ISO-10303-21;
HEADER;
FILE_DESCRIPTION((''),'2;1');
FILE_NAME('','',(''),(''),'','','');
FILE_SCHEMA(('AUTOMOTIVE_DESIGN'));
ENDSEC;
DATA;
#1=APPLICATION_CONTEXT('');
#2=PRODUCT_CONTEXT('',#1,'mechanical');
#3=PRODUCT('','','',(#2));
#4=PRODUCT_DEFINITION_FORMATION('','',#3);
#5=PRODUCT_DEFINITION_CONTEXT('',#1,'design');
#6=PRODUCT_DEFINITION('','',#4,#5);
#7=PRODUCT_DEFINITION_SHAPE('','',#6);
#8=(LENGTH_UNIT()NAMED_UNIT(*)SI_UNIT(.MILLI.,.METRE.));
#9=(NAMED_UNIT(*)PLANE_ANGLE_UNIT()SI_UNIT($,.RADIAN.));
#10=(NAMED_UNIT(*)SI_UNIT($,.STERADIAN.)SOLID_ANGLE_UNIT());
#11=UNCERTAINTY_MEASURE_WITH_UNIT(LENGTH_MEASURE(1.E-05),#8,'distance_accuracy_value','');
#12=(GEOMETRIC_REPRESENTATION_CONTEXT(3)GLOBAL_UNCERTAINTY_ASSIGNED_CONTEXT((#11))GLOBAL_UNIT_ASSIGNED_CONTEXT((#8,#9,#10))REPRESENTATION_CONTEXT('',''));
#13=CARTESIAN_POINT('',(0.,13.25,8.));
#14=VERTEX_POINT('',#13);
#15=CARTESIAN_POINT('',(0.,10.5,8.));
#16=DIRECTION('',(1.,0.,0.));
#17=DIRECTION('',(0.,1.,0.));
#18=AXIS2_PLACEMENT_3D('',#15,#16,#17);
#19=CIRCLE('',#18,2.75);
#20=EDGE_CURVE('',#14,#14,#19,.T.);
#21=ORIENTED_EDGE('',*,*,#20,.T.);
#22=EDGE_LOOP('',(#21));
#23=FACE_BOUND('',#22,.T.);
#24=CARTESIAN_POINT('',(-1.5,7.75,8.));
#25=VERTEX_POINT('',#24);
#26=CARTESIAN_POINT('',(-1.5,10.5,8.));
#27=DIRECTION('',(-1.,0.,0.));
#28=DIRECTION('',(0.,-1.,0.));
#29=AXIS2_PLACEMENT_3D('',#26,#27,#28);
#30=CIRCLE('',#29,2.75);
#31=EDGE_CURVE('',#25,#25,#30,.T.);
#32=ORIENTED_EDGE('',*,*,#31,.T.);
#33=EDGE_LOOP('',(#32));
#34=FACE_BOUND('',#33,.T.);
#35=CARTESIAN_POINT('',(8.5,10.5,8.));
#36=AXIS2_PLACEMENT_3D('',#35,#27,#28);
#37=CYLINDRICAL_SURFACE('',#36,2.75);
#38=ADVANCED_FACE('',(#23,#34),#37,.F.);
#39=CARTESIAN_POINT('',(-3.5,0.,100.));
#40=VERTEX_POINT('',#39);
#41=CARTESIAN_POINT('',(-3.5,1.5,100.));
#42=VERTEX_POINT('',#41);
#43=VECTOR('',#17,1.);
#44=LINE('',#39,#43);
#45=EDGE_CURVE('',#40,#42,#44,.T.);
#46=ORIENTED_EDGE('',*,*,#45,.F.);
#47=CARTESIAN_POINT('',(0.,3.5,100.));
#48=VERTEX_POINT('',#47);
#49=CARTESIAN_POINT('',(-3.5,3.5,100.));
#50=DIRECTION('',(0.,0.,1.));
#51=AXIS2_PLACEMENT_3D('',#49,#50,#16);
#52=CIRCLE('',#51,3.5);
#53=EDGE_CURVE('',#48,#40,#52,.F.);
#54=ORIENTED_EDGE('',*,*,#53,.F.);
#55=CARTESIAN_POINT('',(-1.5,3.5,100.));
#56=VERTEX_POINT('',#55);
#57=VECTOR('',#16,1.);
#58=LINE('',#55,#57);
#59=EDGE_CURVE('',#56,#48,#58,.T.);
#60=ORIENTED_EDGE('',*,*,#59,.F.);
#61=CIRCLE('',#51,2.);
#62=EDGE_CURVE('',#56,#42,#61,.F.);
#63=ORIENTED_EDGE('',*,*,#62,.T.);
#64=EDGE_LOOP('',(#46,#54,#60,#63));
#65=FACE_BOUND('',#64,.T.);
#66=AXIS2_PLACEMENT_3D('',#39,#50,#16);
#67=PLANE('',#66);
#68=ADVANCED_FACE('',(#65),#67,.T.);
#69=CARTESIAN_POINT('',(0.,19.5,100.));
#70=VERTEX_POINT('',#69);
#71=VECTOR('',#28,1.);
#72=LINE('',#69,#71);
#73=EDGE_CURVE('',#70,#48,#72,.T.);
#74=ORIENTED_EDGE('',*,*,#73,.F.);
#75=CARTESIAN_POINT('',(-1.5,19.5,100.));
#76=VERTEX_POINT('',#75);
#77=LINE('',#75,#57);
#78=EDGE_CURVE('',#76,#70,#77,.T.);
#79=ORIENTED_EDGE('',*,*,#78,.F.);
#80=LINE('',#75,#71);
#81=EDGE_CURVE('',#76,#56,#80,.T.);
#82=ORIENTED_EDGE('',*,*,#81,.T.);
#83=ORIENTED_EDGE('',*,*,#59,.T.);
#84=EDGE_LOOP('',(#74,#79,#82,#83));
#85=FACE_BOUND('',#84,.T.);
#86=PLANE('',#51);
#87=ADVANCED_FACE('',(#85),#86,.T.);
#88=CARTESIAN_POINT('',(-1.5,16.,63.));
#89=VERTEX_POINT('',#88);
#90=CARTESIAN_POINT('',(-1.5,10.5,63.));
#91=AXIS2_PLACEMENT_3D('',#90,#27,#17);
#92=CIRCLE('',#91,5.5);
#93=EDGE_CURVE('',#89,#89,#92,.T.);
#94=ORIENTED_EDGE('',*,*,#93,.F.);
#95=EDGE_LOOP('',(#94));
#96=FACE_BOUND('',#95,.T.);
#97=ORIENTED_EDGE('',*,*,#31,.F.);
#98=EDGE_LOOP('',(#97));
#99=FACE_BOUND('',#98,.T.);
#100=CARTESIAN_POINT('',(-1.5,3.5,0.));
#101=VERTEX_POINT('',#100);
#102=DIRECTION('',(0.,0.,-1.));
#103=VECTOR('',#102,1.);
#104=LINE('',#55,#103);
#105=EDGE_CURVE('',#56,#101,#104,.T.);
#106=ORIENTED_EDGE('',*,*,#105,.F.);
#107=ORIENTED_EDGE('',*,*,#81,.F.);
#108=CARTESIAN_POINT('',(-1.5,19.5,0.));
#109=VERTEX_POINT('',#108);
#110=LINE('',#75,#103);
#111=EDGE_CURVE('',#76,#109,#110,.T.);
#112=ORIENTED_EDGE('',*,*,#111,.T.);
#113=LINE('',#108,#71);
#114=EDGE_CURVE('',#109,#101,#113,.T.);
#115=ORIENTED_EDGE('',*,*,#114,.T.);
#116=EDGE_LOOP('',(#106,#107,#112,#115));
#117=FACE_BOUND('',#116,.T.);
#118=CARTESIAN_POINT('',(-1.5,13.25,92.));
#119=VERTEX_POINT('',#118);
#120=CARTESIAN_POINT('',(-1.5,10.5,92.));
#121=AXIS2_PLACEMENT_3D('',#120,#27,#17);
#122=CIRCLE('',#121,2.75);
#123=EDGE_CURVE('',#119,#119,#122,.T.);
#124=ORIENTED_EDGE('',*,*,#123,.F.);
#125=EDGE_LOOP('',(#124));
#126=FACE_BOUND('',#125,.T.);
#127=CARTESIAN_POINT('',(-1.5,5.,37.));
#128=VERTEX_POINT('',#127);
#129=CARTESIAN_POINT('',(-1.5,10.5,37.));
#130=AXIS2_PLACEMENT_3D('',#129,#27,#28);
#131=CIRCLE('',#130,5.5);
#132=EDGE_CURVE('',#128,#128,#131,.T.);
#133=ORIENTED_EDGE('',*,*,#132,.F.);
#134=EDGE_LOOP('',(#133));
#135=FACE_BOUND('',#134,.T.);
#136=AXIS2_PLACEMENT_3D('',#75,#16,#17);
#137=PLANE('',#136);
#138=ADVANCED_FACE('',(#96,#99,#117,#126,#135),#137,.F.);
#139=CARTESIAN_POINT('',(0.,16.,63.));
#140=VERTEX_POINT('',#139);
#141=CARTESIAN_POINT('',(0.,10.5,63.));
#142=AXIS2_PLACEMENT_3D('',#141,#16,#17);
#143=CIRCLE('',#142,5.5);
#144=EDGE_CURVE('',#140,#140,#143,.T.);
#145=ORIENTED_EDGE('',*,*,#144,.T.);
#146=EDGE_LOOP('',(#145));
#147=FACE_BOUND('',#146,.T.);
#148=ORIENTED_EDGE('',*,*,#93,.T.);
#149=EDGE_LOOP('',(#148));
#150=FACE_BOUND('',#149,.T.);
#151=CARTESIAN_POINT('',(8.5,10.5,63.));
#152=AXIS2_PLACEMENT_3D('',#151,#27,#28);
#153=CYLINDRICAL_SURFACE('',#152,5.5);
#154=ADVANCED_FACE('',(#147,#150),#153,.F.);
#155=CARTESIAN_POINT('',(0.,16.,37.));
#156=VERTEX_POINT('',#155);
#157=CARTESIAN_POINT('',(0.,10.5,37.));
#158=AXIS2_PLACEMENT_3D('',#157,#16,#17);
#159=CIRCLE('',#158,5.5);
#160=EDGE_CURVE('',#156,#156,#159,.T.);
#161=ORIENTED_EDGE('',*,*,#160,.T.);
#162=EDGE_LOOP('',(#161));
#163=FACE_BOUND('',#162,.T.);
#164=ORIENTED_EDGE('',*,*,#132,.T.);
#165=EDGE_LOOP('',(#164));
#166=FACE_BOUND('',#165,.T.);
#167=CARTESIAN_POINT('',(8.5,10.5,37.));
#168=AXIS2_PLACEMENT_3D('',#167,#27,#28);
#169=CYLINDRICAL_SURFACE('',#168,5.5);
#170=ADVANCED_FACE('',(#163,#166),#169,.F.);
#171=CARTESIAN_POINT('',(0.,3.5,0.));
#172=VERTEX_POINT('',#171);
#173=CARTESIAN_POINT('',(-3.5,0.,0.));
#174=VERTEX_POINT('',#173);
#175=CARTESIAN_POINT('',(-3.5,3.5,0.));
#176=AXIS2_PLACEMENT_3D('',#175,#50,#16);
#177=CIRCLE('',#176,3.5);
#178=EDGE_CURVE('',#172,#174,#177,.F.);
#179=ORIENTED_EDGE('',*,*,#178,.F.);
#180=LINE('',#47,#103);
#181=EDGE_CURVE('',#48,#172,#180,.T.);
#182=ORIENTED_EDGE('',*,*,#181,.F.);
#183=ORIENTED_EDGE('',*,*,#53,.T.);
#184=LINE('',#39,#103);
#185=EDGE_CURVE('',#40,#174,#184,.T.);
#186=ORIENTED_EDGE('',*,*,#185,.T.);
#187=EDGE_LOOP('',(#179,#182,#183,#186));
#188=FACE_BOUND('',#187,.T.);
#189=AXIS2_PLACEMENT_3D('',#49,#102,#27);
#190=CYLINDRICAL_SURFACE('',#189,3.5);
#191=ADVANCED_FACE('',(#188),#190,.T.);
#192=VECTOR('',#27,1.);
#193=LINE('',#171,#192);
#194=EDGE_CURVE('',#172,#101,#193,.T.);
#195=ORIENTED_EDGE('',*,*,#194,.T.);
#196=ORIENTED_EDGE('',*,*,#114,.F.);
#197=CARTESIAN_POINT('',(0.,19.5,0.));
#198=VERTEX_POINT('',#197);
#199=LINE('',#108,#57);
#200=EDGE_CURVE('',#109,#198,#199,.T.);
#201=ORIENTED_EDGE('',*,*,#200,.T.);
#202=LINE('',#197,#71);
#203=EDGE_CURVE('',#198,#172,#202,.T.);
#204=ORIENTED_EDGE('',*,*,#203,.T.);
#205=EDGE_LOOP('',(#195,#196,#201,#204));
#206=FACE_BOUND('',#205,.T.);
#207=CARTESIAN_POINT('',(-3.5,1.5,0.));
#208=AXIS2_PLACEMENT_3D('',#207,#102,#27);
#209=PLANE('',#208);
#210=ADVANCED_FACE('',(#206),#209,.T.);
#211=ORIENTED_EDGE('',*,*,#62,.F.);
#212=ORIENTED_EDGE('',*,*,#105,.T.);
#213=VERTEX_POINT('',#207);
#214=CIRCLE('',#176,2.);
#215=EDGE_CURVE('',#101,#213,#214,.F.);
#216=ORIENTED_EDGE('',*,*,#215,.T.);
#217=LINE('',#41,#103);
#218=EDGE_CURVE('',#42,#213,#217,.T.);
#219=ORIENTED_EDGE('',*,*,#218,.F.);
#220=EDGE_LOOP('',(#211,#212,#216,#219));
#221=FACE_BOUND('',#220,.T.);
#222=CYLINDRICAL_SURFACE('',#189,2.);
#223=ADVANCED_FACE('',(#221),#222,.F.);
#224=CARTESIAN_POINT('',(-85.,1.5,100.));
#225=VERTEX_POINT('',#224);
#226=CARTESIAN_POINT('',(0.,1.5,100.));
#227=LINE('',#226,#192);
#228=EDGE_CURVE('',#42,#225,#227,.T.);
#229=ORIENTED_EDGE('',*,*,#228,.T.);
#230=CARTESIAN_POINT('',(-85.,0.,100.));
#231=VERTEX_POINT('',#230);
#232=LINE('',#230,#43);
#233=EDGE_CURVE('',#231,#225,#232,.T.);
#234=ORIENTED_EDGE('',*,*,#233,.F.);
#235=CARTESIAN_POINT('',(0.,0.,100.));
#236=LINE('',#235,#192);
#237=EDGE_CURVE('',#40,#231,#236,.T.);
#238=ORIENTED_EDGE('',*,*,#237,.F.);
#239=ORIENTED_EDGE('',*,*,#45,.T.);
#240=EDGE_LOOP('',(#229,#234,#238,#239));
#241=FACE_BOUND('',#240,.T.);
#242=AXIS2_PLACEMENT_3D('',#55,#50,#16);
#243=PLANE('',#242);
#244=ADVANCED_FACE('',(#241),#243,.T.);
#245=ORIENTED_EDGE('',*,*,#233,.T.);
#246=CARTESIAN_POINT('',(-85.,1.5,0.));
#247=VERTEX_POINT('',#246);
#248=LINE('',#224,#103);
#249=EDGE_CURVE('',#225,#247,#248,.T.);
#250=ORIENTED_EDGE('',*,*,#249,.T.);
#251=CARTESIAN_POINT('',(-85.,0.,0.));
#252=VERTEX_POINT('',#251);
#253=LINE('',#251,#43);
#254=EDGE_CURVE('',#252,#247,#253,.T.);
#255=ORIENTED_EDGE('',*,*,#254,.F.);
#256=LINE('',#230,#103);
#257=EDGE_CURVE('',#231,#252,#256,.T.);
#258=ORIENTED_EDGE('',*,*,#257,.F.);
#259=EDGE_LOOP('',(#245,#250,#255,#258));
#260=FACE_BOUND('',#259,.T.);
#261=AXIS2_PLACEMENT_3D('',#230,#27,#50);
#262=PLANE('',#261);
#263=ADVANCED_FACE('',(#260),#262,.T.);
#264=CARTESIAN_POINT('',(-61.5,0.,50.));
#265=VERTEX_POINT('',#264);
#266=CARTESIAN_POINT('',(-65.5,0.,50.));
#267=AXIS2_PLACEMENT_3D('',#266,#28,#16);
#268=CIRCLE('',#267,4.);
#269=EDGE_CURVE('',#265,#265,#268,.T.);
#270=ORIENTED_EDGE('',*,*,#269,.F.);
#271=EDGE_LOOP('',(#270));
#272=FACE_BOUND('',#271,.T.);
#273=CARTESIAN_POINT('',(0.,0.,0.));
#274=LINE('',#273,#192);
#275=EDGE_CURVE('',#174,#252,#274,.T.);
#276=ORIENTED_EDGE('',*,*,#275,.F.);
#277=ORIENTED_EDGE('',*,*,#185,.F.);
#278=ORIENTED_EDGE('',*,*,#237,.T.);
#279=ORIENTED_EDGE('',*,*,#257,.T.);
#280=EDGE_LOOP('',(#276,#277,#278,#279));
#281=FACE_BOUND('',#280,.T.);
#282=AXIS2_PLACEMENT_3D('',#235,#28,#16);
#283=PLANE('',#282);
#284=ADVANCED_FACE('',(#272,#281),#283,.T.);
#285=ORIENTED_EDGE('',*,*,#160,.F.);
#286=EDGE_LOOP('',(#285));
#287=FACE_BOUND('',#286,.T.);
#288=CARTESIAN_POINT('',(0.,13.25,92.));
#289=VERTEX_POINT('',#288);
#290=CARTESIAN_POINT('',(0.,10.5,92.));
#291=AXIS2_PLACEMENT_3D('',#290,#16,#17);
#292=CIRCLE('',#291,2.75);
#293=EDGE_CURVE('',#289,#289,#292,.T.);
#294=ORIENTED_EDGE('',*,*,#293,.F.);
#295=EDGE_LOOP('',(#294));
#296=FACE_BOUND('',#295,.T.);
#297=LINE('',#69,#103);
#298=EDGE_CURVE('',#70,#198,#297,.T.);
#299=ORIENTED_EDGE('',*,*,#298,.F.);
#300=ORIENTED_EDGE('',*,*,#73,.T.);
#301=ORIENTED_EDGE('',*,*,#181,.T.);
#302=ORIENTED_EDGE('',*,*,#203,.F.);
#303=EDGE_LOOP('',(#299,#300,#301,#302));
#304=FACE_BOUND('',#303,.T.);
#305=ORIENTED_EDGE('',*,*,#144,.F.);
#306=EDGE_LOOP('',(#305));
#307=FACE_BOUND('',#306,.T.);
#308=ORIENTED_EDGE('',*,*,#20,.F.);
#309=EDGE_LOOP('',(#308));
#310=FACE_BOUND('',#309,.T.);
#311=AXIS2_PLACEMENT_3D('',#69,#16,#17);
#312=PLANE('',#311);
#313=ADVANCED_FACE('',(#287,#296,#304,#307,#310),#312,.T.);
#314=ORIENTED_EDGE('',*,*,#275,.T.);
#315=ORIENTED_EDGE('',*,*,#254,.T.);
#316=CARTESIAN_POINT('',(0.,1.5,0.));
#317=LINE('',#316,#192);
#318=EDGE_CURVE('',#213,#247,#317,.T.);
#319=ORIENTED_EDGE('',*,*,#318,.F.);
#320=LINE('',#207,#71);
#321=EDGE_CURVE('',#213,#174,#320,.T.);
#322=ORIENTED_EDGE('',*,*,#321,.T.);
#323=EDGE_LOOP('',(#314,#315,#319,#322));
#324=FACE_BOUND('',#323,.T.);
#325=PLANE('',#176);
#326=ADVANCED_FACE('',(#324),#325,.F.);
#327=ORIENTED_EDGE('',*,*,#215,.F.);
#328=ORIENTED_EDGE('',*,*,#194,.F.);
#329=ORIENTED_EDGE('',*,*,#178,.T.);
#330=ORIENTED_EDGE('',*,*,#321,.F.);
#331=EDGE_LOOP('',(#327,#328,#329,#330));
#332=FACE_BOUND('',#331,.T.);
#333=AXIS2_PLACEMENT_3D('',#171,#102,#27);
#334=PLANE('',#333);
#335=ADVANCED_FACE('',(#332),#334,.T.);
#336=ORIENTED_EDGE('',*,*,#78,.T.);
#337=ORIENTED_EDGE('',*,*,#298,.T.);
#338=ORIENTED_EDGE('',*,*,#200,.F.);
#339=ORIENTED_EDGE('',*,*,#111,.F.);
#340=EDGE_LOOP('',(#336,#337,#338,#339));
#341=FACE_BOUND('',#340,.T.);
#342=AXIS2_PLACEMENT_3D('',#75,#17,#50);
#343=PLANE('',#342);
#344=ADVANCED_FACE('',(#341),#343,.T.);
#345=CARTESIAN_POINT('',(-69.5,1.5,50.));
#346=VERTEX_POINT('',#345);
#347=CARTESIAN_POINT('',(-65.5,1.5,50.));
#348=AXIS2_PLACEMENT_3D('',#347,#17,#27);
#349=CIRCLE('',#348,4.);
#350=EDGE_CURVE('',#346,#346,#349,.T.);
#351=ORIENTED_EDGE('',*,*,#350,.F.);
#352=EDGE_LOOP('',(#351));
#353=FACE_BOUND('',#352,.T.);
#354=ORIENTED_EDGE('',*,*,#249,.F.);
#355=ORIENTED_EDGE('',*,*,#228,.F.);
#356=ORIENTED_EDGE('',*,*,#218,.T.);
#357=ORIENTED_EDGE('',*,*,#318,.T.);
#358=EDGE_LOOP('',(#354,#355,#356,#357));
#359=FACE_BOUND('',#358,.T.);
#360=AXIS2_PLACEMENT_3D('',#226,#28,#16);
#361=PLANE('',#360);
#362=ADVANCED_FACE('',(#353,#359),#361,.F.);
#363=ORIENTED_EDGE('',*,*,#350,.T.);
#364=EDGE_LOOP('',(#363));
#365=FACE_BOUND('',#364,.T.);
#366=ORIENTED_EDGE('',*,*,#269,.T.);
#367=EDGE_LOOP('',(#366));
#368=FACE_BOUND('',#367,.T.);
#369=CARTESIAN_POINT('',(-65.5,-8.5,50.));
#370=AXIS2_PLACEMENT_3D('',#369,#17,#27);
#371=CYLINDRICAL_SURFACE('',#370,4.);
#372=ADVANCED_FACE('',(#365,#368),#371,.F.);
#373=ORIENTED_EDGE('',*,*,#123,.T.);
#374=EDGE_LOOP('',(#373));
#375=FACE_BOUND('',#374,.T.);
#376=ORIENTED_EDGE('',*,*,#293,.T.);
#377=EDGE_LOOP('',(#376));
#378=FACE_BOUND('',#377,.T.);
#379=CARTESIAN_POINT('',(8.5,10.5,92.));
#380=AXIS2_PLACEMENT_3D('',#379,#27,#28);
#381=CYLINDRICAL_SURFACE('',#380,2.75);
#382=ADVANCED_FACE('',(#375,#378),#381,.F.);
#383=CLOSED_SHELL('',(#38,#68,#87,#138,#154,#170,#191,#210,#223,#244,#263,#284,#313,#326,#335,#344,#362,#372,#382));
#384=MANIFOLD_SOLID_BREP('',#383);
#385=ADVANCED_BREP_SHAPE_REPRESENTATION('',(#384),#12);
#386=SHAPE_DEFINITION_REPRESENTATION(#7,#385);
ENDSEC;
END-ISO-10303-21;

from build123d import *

# Parameters (mm, degrees)
BASE_FLANGE1_DEPTH = 100
SKETCH6_R          = 5.5
SKETCH6_R_2        = 2.75
CUT_EXTRUDE1_DEPTH = 10
SKETCH7_R          = 4
CUT_EXTRUDE2_DEPTH = 10


# Sheet-metal steps are written as plain solids
with BuildPart() as part:
    # Sketch1 → Base-Flange1 (new body)
    with BuildSketch(Plane.XY):
        with BuildLine():
            Line((0, 19.5), (0, 3.5))
            ThreePointArc((0, 3.5), (-1.025126266, 1.025126266), (-3.5, 0))
            Line((-3.5, 0), (-85, 0))
            Line((-85, 0), (-85, 1.5))
            Line((-85, 1.5), (-3.5, 1.5))
            ThreePointArc((-3.5, 1.5), (-2.085786438, 2.085786438), (-1.5, 3.5))
            Line((-1.5, 3.5), (-1.5, 19.5))
            Line((-1.5, 19.5), (0, 19.5))
        make_face()
    extrude(amount=BASE_FLANGE1_DEPTH)

    # Sketch6 → Cut-Extrude1 (cut)
    with BuildSketch(Plane.ZY.offset(1.5)):
        with Locations(Location((37, 10.5, 0), (0, 0, 270))):
            Circle(SKETCH6_R)
        with Locations(Location((8, 10.5, 0), (0, 0, 270))):
            Circle(SKETCH6_R_2)
        with Locations(Location((92, 10.5, 0), (0, 0, 90))):
            Circle(SKETCH6_R_2)
        with Locations(Location((63, 10.5, 0), (0, 0, 90))):
            Circle(SKETCH6_R)
    extrude(amount=-CUT_EXTRUDE1_DEPTH, mode=Mode.SUBTRACT)

    # Sketch7 → Cut-Extrude2 (cut)
    with BuildSketch(Plane(origin=(0, 1.5, 0), x_dir=(1, 0, 0), z_dir=(0, 1, 0))):
        with Locations(Location((-65.5, -50, 0), (0, 0, 180))):
            Circle(SKETCH7_R)
    extrude(amount=-CUT_EXTRUDE2_DEPTH, mode=Mode.SUBTRACT)


solid = part.part
